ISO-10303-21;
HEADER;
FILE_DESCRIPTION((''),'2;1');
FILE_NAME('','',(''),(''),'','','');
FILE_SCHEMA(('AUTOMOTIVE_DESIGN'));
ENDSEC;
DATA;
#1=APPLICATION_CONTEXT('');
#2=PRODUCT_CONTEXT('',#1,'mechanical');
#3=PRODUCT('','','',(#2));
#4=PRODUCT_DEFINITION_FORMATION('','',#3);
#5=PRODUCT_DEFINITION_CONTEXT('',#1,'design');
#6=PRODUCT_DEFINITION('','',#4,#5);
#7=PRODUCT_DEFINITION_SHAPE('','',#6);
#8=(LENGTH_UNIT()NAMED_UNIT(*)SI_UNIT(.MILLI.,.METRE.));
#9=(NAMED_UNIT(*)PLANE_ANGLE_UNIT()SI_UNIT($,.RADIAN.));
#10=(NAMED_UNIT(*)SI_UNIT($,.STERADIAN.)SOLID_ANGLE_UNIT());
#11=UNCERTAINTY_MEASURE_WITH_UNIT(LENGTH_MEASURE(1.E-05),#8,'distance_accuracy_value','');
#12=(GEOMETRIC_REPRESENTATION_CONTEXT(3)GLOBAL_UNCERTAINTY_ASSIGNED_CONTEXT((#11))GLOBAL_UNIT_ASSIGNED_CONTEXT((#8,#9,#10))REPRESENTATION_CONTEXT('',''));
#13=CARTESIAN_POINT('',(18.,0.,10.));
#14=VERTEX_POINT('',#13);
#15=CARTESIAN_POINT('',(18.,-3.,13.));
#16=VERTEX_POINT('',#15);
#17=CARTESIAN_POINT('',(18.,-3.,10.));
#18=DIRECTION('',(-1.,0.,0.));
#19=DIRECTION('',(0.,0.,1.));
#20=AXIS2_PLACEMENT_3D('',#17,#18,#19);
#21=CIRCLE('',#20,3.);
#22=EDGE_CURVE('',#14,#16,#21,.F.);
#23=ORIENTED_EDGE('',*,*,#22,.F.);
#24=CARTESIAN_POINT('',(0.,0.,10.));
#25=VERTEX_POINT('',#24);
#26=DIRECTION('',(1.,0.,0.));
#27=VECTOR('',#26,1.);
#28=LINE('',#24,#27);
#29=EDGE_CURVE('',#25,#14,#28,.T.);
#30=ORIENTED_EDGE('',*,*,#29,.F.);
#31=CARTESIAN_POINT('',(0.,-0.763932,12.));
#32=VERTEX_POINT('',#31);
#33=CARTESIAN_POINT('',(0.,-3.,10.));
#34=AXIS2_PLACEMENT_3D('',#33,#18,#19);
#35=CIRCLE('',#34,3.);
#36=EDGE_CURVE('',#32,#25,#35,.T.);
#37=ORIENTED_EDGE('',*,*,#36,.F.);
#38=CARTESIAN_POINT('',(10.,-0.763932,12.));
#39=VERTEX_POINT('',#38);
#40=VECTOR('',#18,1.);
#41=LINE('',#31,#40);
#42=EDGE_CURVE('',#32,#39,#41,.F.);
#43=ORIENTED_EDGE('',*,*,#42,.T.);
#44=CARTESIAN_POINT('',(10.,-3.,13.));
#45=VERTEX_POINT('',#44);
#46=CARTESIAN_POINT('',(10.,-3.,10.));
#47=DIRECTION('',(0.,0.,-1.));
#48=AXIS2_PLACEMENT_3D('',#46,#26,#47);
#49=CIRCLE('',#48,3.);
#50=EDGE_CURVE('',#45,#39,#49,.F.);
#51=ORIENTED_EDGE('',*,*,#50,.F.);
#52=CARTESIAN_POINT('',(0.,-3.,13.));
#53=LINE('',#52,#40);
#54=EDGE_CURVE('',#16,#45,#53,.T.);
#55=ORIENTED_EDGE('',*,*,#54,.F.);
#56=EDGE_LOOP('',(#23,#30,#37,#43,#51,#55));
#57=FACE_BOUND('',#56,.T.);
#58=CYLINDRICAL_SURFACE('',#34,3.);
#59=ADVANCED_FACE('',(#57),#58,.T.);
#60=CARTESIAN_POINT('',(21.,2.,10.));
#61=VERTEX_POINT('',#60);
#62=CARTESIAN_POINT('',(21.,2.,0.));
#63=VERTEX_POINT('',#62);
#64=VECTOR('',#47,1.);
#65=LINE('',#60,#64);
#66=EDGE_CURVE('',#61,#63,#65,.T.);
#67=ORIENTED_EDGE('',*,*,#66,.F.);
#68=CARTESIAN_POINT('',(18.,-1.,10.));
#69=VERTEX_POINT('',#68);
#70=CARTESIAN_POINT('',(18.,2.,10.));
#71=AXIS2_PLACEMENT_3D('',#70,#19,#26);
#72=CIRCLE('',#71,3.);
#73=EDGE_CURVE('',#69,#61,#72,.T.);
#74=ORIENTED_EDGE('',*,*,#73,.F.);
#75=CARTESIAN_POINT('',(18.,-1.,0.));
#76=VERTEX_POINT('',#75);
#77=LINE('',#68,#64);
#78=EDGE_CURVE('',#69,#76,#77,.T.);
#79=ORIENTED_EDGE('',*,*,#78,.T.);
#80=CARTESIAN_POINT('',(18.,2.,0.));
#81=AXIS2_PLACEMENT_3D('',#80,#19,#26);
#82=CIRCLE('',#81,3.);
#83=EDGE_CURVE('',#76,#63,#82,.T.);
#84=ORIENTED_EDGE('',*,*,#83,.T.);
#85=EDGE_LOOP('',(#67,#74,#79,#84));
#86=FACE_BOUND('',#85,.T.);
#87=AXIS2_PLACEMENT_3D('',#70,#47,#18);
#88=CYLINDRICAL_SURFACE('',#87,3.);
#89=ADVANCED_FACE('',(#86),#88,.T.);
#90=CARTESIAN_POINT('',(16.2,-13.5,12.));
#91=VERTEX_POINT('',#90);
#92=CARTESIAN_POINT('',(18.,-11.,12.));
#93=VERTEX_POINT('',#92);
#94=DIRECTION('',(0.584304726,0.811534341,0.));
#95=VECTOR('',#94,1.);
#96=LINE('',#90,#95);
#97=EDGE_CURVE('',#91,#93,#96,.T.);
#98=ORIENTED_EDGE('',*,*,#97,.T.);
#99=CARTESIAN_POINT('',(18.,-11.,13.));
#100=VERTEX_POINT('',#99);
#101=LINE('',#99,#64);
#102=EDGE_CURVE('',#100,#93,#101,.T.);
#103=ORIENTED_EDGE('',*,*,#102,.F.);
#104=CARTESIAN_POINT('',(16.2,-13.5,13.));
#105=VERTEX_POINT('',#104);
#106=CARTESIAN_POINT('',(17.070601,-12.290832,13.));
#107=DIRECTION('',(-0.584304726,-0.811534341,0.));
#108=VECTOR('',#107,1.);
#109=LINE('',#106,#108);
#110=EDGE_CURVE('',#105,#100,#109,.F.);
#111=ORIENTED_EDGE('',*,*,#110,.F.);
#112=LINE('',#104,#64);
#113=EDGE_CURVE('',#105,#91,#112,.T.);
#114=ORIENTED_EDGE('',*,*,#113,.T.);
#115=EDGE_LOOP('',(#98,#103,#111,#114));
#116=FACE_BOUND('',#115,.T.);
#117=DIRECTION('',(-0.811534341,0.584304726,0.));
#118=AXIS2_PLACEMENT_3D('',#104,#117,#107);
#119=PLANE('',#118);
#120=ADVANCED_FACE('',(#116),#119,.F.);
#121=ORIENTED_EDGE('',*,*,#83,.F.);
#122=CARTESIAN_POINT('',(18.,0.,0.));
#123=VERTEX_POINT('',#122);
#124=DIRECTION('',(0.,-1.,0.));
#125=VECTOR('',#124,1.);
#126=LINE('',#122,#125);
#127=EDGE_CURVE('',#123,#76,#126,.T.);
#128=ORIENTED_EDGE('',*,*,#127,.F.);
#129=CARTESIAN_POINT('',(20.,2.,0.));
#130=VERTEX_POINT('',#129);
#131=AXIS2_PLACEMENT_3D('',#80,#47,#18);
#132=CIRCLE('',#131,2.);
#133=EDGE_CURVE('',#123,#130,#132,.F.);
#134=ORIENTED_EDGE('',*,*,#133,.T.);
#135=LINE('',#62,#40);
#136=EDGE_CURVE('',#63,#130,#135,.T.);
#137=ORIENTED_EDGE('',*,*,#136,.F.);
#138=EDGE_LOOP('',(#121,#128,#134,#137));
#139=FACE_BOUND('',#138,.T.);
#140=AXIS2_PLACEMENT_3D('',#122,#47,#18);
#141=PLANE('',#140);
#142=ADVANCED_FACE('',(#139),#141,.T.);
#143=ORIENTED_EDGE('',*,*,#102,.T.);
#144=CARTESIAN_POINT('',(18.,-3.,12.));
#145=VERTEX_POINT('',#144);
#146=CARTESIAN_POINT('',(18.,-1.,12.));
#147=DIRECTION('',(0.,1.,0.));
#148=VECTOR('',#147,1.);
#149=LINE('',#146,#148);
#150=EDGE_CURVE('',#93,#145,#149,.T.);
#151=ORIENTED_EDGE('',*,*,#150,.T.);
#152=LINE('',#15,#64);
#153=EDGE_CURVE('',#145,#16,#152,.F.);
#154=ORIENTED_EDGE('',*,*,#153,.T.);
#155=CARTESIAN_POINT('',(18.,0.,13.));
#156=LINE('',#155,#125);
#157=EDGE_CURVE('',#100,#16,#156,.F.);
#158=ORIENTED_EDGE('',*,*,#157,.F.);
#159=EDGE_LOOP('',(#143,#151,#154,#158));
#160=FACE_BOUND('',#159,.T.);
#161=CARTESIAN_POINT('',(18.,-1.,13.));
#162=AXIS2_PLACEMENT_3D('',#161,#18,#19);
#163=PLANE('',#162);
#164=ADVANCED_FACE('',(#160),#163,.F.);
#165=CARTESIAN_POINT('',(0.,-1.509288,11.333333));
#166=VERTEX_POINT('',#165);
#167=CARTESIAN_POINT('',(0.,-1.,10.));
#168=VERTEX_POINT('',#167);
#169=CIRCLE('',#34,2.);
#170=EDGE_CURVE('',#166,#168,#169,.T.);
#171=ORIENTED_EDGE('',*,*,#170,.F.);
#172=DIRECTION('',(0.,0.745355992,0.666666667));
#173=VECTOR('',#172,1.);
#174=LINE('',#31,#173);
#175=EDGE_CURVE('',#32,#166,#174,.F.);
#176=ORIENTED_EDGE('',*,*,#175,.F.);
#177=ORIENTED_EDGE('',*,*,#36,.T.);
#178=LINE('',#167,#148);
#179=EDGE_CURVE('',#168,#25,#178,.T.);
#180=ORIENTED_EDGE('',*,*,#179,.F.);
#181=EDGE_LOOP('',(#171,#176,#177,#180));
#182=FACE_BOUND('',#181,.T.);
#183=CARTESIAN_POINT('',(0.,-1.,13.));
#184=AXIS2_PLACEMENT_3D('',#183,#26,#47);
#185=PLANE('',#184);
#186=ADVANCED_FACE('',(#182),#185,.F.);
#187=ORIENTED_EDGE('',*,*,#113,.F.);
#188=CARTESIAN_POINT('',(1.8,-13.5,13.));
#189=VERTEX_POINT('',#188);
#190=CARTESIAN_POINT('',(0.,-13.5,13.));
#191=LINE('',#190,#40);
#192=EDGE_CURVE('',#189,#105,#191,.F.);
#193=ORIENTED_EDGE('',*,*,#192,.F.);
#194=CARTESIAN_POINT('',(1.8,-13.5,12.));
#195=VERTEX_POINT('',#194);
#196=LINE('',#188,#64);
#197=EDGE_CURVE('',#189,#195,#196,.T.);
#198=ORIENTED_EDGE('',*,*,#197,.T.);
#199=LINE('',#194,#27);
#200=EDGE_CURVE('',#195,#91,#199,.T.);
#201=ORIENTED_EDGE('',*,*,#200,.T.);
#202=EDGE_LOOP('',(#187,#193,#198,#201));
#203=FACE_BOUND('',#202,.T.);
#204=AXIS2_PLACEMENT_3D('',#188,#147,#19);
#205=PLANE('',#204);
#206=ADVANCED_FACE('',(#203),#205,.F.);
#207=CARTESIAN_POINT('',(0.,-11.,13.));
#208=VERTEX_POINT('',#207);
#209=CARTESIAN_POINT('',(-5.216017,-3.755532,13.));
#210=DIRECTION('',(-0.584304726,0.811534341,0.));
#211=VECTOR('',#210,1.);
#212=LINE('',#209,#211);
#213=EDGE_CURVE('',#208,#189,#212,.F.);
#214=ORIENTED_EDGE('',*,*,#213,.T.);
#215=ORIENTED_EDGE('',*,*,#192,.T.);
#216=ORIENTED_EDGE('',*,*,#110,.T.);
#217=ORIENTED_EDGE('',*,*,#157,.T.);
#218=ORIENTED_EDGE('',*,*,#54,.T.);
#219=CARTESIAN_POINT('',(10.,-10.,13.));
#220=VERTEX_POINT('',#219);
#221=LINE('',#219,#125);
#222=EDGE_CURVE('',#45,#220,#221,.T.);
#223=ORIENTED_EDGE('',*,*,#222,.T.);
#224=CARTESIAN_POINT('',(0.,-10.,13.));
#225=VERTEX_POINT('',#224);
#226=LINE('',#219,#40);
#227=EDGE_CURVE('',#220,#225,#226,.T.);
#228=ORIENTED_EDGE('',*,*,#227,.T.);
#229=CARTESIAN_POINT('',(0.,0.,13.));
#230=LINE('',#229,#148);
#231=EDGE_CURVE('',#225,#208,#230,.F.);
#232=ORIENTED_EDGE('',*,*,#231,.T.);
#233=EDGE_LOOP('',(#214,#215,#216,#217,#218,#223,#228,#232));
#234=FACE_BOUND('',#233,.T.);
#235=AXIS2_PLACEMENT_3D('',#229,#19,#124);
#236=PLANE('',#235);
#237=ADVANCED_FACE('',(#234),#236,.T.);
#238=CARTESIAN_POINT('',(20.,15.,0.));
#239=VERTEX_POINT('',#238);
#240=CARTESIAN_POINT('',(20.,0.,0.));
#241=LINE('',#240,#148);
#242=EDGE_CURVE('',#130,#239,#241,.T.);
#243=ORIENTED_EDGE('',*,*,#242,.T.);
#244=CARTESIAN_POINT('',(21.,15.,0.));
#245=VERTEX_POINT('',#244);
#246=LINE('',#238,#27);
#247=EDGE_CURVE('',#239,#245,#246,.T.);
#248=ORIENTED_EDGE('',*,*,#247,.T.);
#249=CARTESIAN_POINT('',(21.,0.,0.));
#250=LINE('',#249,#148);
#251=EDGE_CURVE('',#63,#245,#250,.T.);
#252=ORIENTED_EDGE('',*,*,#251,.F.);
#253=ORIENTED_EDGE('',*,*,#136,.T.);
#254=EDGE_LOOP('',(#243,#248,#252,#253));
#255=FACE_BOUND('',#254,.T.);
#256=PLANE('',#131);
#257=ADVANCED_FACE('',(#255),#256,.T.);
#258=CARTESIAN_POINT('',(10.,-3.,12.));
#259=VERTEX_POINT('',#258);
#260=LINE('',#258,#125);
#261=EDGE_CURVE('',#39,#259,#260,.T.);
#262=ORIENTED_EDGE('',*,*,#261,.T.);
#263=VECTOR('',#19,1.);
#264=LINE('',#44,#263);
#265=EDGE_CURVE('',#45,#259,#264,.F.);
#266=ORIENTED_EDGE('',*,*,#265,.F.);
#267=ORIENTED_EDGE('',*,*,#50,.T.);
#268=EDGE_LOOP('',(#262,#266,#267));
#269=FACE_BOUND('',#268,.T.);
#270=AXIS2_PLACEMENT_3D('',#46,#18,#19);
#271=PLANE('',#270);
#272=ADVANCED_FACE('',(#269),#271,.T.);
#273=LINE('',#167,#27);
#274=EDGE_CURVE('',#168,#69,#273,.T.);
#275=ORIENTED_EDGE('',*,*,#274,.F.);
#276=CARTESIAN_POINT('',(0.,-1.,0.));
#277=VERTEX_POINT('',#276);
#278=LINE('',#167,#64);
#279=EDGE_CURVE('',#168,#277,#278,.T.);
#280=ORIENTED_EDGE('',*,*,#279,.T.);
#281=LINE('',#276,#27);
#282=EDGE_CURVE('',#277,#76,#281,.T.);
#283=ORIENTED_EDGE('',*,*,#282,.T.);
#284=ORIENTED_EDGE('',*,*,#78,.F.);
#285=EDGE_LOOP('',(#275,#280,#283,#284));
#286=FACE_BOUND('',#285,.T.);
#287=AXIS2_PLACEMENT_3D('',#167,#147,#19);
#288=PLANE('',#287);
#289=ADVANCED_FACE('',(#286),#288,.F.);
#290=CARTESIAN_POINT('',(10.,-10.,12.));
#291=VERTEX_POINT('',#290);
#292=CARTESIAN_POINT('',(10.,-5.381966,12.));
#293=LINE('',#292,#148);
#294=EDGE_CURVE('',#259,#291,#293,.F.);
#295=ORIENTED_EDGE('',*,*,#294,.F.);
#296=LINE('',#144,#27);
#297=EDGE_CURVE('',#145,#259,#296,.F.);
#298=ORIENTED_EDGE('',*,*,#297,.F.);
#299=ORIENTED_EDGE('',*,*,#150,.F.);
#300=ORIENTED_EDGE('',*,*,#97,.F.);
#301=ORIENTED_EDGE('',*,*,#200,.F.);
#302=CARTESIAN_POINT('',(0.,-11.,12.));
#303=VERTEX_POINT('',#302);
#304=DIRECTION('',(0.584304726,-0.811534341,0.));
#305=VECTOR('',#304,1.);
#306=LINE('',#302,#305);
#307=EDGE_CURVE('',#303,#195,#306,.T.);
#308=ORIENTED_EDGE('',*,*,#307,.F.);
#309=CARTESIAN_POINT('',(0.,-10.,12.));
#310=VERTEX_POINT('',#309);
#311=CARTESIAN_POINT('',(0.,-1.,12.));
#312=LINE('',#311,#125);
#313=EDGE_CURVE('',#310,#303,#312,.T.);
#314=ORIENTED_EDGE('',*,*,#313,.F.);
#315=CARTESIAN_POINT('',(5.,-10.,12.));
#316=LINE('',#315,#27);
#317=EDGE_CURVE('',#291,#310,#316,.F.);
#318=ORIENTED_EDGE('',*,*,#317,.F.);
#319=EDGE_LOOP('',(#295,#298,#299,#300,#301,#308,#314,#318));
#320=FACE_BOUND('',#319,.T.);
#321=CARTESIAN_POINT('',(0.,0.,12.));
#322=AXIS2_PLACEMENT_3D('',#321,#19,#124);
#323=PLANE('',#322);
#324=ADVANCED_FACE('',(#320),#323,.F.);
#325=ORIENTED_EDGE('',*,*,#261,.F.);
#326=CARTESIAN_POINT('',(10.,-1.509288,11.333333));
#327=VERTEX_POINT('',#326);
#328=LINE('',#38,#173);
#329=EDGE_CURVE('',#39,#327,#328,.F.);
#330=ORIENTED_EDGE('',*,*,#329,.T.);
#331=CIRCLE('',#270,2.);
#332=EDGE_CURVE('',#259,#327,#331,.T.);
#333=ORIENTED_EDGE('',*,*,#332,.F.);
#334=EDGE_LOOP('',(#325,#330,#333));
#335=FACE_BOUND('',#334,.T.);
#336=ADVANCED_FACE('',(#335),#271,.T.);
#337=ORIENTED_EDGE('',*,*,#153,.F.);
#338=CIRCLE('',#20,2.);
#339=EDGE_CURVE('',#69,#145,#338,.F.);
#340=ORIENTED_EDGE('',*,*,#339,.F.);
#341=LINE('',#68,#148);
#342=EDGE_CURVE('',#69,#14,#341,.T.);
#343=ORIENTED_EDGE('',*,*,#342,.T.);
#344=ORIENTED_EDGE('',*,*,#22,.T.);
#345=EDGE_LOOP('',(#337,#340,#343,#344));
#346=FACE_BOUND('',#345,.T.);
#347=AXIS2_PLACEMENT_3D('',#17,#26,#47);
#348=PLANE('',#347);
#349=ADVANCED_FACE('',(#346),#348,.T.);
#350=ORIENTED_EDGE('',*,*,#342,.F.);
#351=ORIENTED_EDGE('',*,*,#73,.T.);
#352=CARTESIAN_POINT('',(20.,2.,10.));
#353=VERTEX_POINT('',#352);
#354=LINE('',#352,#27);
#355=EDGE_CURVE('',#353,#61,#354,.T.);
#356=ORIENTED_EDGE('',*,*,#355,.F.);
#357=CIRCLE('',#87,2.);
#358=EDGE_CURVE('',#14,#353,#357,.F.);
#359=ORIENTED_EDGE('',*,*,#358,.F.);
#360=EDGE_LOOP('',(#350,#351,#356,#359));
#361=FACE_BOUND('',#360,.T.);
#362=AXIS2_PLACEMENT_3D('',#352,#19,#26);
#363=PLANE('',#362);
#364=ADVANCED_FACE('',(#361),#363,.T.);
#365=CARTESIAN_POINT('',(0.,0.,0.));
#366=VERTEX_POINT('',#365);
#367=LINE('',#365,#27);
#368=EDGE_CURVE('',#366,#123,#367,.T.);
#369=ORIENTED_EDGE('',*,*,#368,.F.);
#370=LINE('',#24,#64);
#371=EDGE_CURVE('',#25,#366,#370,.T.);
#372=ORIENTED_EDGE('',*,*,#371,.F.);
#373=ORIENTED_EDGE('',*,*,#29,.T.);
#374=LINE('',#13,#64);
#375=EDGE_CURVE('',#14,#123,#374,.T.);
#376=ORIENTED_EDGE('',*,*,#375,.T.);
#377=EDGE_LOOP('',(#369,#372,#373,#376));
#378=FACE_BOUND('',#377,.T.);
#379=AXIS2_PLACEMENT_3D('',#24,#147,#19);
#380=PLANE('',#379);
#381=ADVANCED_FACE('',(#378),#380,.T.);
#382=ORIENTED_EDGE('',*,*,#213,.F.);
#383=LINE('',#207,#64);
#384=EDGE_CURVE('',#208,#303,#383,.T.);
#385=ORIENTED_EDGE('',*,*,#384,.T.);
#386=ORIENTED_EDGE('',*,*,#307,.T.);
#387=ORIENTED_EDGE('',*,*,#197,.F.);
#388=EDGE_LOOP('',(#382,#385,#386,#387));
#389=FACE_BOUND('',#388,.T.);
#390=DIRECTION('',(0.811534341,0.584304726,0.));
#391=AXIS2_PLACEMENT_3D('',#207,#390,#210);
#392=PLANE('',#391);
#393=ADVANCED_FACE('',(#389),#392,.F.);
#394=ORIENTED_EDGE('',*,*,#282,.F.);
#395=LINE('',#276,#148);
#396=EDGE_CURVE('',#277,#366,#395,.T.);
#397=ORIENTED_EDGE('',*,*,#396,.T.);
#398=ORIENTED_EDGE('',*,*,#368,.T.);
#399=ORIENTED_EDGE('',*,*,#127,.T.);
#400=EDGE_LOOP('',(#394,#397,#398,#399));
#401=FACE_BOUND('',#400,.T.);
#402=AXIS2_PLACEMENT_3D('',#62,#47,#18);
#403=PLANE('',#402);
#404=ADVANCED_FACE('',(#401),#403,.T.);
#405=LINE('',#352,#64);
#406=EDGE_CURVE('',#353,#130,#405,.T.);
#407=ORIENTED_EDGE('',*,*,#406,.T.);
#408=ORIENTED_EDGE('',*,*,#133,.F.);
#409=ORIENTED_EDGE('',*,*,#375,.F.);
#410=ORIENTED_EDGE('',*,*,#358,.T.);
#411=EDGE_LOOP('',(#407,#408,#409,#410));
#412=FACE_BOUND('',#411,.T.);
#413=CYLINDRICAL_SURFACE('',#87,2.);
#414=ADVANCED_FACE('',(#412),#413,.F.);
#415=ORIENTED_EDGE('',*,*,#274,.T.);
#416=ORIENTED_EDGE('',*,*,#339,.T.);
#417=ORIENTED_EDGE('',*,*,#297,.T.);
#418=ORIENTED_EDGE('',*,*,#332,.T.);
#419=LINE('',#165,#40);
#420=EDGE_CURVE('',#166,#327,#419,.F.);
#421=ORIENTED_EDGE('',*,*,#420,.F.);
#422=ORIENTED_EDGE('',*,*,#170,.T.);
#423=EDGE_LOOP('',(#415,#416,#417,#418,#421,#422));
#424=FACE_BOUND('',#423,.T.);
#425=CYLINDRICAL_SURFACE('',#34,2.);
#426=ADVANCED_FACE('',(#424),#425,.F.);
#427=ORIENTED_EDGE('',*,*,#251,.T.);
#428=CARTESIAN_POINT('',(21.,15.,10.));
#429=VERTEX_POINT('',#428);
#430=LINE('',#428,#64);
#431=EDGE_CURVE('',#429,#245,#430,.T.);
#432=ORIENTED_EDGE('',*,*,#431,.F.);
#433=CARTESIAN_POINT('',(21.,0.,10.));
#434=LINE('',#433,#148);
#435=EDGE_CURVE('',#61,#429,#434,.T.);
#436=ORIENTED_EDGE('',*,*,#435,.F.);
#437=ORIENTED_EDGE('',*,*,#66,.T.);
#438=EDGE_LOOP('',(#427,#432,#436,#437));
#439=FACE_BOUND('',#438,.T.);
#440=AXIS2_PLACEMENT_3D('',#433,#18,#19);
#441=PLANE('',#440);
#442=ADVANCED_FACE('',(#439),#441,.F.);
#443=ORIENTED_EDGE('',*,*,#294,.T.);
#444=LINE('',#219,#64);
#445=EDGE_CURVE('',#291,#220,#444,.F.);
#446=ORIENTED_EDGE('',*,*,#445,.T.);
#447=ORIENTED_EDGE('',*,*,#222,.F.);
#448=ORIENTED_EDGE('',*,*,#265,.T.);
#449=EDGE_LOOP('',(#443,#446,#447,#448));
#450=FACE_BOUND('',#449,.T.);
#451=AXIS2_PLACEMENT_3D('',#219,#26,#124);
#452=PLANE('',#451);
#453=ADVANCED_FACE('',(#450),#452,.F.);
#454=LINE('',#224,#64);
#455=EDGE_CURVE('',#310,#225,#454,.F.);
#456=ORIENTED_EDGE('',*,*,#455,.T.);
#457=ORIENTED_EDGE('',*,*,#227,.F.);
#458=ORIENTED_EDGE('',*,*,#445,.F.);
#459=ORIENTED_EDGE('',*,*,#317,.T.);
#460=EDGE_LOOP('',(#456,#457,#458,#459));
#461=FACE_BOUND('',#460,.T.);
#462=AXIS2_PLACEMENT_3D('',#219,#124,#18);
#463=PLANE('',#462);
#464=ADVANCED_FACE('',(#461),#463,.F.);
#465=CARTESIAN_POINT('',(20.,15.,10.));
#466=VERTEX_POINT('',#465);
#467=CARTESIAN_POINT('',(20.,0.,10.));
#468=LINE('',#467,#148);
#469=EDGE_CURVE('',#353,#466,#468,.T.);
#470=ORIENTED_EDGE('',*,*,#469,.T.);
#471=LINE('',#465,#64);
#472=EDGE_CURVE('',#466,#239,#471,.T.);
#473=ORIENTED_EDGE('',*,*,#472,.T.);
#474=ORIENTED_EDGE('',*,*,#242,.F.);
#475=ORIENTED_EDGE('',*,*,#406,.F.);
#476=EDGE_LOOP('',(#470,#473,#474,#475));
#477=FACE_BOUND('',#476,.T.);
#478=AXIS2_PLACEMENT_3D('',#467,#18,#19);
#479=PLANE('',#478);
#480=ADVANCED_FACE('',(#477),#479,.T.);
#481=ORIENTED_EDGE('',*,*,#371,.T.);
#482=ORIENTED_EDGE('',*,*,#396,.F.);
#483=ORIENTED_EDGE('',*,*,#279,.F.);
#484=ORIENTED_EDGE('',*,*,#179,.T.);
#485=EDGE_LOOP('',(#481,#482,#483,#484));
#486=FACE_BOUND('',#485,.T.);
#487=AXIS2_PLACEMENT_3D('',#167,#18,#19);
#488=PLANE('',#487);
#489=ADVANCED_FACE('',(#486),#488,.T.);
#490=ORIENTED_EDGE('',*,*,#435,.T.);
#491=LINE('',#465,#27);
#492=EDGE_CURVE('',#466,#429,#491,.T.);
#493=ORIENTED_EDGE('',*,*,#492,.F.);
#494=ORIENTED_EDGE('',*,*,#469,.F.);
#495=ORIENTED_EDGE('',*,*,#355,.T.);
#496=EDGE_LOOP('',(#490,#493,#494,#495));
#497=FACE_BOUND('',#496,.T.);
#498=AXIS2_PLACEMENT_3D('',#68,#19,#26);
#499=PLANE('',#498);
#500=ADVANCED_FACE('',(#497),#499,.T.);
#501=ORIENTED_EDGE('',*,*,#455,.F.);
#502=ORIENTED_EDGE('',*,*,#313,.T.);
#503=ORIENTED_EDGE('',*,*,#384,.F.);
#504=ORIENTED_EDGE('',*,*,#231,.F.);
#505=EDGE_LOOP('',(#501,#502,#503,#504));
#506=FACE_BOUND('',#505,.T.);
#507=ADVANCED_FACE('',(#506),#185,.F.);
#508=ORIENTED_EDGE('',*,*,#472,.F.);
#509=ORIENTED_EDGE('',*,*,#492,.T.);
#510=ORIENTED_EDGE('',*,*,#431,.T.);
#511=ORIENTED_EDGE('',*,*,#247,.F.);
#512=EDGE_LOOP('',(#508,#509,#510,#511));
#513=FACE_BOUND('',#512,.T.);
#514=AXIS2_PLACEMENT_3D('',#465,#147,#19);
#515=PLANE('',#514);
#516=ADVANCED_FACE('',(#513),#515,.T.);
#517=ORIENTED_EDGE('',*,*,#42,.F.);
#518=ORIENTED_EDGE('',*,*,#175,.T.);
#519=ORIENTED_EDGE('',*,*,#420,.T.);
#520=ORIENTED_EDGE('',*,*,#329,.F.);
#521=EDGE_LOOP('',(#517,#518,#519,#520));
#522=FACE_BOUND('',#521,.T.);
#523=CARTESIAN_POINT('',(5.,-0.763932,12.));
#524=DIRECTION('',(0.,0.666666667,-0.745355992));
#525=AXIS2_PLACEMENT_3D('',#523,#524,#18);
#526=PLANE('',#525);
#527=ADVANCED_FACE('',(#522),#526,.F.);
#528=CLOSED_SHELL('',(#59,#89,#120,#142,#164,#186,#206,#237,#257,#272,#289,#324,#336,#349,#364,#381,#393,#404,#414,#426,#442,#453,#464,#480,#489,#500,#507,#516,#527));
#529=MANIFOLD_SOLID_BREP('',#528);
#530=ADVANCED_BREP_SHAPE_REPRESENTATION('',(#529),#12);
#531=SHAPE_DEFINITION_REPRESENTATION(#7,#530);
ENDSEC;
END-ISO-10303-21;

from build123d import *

# Parameters (mm, degrees)
SM_BASE_FLANGE_1_DEPTH      = 10
SM_EDGE_FLANGE_2_DEPTH      = 18
SM_START                    = 1
SM_EDGE_FLANGE_2_FLAT_DEPTH = 1
SKETCH_10_W                 = 40
SKETCH_10_H                 = 40
CUT_EXTRUDE_1_DEPTH         = 29.460498942
SMNORMALCUT_DEPTH           = 10


# Read off the part's stored shape, not the designer's step: SMNormalCut
# Sheet-metal steps are written as plain solids
with BuildPart() as part:
    # Sketch 1 → 基体-法兰1 (new body)
    with BuildSketch(Plane.XY):
        with BuildLine():
            Line((0, 0), (18, 0))
            ThreePointArc((18, 0), (19.414213562, 0.585786438), (20, 2))
            Line((20, 2), (20, 15))
            Line((20, 15), (21, 15))
            Line((21, 15), (21, 2))
            ThreePointArc((21, 2), (20.121320344, -0.121320344), (18, -1))
            Line((18, -1), (0, -1))
            Line((0, -1), (0, 0))
        make_face()
    extrude(amount=SM_BASE_FLANGE_1_DEPTH)

    # 边线-法兰2 bend section (across the edge) → 边线-法兰2 (add)
    with BuildSketch(Plane(origin=(18, -1, 12), x_dir=(0, 0, -1), z_dir=(-1, 0, 0))):
        with BuildLine():
            Line((-1, 2), (0, 2))
            ThreePointArc((0, 2), (0.585786438, 0.585786438), (2, 0))
            Line((2, 0), (2, -1))
            ThreePointArc((2, -1), (-0.121320344, -0.121320344), (-1, 2))
        make_face()
    extrude(amount=SM_EDGE_FLANGE_2_DEPTH)

    # 边线-法兰2 profile (on flange) → 边线-法兰2 flat (add)
    with BuildSketch(Plane(origin=(0, -1, 12), x_dir=(-1, 0, 0), z_dir=(0, 0, 1)).offset(SM_START)):
        Polygon((0, 2), (0, 10), (-1.8, 12.5), (-16.2, 12.5), (-18, 10), (-18, 2), align=None)
    extrude(amount=-SM_EDGE_FLANGE_2_FLAT_DEPTH)

    # 草图10 → 切除-拉伸1 (cut, through all)
    with BuildSketch(Plane(origin=(0, 0, 12), x_dir=(-1, 0, 0), z_dir=(0, 0, -1))):
        with Locations((10, 10)):
            Rectangle(SKETCH_10_W, SKETCH_10_H)
    extrude(amount=-CUT_EXTRUDE_1_DEPTH, mode=Mode.SUBTRACT)

    # SMNormalCut outline → SMNormalCut (cut)
    with BuildSketch(Plane.YZ):
        with BuildLine():
            ThreePointArc((-3, 12), (-2.183503419, 11.825741858), (-1.509288015, 11.333333333))
            Line((-1.509288015, 11.333333333), (-0.763932023, 12))
            Line((-0.763932023, 12), (-3, 12))
        make_face()
    extrude(amount=SMNORMALCUT_DEPTH, mode=Mode.SUBTRACT)


solid = part.part
